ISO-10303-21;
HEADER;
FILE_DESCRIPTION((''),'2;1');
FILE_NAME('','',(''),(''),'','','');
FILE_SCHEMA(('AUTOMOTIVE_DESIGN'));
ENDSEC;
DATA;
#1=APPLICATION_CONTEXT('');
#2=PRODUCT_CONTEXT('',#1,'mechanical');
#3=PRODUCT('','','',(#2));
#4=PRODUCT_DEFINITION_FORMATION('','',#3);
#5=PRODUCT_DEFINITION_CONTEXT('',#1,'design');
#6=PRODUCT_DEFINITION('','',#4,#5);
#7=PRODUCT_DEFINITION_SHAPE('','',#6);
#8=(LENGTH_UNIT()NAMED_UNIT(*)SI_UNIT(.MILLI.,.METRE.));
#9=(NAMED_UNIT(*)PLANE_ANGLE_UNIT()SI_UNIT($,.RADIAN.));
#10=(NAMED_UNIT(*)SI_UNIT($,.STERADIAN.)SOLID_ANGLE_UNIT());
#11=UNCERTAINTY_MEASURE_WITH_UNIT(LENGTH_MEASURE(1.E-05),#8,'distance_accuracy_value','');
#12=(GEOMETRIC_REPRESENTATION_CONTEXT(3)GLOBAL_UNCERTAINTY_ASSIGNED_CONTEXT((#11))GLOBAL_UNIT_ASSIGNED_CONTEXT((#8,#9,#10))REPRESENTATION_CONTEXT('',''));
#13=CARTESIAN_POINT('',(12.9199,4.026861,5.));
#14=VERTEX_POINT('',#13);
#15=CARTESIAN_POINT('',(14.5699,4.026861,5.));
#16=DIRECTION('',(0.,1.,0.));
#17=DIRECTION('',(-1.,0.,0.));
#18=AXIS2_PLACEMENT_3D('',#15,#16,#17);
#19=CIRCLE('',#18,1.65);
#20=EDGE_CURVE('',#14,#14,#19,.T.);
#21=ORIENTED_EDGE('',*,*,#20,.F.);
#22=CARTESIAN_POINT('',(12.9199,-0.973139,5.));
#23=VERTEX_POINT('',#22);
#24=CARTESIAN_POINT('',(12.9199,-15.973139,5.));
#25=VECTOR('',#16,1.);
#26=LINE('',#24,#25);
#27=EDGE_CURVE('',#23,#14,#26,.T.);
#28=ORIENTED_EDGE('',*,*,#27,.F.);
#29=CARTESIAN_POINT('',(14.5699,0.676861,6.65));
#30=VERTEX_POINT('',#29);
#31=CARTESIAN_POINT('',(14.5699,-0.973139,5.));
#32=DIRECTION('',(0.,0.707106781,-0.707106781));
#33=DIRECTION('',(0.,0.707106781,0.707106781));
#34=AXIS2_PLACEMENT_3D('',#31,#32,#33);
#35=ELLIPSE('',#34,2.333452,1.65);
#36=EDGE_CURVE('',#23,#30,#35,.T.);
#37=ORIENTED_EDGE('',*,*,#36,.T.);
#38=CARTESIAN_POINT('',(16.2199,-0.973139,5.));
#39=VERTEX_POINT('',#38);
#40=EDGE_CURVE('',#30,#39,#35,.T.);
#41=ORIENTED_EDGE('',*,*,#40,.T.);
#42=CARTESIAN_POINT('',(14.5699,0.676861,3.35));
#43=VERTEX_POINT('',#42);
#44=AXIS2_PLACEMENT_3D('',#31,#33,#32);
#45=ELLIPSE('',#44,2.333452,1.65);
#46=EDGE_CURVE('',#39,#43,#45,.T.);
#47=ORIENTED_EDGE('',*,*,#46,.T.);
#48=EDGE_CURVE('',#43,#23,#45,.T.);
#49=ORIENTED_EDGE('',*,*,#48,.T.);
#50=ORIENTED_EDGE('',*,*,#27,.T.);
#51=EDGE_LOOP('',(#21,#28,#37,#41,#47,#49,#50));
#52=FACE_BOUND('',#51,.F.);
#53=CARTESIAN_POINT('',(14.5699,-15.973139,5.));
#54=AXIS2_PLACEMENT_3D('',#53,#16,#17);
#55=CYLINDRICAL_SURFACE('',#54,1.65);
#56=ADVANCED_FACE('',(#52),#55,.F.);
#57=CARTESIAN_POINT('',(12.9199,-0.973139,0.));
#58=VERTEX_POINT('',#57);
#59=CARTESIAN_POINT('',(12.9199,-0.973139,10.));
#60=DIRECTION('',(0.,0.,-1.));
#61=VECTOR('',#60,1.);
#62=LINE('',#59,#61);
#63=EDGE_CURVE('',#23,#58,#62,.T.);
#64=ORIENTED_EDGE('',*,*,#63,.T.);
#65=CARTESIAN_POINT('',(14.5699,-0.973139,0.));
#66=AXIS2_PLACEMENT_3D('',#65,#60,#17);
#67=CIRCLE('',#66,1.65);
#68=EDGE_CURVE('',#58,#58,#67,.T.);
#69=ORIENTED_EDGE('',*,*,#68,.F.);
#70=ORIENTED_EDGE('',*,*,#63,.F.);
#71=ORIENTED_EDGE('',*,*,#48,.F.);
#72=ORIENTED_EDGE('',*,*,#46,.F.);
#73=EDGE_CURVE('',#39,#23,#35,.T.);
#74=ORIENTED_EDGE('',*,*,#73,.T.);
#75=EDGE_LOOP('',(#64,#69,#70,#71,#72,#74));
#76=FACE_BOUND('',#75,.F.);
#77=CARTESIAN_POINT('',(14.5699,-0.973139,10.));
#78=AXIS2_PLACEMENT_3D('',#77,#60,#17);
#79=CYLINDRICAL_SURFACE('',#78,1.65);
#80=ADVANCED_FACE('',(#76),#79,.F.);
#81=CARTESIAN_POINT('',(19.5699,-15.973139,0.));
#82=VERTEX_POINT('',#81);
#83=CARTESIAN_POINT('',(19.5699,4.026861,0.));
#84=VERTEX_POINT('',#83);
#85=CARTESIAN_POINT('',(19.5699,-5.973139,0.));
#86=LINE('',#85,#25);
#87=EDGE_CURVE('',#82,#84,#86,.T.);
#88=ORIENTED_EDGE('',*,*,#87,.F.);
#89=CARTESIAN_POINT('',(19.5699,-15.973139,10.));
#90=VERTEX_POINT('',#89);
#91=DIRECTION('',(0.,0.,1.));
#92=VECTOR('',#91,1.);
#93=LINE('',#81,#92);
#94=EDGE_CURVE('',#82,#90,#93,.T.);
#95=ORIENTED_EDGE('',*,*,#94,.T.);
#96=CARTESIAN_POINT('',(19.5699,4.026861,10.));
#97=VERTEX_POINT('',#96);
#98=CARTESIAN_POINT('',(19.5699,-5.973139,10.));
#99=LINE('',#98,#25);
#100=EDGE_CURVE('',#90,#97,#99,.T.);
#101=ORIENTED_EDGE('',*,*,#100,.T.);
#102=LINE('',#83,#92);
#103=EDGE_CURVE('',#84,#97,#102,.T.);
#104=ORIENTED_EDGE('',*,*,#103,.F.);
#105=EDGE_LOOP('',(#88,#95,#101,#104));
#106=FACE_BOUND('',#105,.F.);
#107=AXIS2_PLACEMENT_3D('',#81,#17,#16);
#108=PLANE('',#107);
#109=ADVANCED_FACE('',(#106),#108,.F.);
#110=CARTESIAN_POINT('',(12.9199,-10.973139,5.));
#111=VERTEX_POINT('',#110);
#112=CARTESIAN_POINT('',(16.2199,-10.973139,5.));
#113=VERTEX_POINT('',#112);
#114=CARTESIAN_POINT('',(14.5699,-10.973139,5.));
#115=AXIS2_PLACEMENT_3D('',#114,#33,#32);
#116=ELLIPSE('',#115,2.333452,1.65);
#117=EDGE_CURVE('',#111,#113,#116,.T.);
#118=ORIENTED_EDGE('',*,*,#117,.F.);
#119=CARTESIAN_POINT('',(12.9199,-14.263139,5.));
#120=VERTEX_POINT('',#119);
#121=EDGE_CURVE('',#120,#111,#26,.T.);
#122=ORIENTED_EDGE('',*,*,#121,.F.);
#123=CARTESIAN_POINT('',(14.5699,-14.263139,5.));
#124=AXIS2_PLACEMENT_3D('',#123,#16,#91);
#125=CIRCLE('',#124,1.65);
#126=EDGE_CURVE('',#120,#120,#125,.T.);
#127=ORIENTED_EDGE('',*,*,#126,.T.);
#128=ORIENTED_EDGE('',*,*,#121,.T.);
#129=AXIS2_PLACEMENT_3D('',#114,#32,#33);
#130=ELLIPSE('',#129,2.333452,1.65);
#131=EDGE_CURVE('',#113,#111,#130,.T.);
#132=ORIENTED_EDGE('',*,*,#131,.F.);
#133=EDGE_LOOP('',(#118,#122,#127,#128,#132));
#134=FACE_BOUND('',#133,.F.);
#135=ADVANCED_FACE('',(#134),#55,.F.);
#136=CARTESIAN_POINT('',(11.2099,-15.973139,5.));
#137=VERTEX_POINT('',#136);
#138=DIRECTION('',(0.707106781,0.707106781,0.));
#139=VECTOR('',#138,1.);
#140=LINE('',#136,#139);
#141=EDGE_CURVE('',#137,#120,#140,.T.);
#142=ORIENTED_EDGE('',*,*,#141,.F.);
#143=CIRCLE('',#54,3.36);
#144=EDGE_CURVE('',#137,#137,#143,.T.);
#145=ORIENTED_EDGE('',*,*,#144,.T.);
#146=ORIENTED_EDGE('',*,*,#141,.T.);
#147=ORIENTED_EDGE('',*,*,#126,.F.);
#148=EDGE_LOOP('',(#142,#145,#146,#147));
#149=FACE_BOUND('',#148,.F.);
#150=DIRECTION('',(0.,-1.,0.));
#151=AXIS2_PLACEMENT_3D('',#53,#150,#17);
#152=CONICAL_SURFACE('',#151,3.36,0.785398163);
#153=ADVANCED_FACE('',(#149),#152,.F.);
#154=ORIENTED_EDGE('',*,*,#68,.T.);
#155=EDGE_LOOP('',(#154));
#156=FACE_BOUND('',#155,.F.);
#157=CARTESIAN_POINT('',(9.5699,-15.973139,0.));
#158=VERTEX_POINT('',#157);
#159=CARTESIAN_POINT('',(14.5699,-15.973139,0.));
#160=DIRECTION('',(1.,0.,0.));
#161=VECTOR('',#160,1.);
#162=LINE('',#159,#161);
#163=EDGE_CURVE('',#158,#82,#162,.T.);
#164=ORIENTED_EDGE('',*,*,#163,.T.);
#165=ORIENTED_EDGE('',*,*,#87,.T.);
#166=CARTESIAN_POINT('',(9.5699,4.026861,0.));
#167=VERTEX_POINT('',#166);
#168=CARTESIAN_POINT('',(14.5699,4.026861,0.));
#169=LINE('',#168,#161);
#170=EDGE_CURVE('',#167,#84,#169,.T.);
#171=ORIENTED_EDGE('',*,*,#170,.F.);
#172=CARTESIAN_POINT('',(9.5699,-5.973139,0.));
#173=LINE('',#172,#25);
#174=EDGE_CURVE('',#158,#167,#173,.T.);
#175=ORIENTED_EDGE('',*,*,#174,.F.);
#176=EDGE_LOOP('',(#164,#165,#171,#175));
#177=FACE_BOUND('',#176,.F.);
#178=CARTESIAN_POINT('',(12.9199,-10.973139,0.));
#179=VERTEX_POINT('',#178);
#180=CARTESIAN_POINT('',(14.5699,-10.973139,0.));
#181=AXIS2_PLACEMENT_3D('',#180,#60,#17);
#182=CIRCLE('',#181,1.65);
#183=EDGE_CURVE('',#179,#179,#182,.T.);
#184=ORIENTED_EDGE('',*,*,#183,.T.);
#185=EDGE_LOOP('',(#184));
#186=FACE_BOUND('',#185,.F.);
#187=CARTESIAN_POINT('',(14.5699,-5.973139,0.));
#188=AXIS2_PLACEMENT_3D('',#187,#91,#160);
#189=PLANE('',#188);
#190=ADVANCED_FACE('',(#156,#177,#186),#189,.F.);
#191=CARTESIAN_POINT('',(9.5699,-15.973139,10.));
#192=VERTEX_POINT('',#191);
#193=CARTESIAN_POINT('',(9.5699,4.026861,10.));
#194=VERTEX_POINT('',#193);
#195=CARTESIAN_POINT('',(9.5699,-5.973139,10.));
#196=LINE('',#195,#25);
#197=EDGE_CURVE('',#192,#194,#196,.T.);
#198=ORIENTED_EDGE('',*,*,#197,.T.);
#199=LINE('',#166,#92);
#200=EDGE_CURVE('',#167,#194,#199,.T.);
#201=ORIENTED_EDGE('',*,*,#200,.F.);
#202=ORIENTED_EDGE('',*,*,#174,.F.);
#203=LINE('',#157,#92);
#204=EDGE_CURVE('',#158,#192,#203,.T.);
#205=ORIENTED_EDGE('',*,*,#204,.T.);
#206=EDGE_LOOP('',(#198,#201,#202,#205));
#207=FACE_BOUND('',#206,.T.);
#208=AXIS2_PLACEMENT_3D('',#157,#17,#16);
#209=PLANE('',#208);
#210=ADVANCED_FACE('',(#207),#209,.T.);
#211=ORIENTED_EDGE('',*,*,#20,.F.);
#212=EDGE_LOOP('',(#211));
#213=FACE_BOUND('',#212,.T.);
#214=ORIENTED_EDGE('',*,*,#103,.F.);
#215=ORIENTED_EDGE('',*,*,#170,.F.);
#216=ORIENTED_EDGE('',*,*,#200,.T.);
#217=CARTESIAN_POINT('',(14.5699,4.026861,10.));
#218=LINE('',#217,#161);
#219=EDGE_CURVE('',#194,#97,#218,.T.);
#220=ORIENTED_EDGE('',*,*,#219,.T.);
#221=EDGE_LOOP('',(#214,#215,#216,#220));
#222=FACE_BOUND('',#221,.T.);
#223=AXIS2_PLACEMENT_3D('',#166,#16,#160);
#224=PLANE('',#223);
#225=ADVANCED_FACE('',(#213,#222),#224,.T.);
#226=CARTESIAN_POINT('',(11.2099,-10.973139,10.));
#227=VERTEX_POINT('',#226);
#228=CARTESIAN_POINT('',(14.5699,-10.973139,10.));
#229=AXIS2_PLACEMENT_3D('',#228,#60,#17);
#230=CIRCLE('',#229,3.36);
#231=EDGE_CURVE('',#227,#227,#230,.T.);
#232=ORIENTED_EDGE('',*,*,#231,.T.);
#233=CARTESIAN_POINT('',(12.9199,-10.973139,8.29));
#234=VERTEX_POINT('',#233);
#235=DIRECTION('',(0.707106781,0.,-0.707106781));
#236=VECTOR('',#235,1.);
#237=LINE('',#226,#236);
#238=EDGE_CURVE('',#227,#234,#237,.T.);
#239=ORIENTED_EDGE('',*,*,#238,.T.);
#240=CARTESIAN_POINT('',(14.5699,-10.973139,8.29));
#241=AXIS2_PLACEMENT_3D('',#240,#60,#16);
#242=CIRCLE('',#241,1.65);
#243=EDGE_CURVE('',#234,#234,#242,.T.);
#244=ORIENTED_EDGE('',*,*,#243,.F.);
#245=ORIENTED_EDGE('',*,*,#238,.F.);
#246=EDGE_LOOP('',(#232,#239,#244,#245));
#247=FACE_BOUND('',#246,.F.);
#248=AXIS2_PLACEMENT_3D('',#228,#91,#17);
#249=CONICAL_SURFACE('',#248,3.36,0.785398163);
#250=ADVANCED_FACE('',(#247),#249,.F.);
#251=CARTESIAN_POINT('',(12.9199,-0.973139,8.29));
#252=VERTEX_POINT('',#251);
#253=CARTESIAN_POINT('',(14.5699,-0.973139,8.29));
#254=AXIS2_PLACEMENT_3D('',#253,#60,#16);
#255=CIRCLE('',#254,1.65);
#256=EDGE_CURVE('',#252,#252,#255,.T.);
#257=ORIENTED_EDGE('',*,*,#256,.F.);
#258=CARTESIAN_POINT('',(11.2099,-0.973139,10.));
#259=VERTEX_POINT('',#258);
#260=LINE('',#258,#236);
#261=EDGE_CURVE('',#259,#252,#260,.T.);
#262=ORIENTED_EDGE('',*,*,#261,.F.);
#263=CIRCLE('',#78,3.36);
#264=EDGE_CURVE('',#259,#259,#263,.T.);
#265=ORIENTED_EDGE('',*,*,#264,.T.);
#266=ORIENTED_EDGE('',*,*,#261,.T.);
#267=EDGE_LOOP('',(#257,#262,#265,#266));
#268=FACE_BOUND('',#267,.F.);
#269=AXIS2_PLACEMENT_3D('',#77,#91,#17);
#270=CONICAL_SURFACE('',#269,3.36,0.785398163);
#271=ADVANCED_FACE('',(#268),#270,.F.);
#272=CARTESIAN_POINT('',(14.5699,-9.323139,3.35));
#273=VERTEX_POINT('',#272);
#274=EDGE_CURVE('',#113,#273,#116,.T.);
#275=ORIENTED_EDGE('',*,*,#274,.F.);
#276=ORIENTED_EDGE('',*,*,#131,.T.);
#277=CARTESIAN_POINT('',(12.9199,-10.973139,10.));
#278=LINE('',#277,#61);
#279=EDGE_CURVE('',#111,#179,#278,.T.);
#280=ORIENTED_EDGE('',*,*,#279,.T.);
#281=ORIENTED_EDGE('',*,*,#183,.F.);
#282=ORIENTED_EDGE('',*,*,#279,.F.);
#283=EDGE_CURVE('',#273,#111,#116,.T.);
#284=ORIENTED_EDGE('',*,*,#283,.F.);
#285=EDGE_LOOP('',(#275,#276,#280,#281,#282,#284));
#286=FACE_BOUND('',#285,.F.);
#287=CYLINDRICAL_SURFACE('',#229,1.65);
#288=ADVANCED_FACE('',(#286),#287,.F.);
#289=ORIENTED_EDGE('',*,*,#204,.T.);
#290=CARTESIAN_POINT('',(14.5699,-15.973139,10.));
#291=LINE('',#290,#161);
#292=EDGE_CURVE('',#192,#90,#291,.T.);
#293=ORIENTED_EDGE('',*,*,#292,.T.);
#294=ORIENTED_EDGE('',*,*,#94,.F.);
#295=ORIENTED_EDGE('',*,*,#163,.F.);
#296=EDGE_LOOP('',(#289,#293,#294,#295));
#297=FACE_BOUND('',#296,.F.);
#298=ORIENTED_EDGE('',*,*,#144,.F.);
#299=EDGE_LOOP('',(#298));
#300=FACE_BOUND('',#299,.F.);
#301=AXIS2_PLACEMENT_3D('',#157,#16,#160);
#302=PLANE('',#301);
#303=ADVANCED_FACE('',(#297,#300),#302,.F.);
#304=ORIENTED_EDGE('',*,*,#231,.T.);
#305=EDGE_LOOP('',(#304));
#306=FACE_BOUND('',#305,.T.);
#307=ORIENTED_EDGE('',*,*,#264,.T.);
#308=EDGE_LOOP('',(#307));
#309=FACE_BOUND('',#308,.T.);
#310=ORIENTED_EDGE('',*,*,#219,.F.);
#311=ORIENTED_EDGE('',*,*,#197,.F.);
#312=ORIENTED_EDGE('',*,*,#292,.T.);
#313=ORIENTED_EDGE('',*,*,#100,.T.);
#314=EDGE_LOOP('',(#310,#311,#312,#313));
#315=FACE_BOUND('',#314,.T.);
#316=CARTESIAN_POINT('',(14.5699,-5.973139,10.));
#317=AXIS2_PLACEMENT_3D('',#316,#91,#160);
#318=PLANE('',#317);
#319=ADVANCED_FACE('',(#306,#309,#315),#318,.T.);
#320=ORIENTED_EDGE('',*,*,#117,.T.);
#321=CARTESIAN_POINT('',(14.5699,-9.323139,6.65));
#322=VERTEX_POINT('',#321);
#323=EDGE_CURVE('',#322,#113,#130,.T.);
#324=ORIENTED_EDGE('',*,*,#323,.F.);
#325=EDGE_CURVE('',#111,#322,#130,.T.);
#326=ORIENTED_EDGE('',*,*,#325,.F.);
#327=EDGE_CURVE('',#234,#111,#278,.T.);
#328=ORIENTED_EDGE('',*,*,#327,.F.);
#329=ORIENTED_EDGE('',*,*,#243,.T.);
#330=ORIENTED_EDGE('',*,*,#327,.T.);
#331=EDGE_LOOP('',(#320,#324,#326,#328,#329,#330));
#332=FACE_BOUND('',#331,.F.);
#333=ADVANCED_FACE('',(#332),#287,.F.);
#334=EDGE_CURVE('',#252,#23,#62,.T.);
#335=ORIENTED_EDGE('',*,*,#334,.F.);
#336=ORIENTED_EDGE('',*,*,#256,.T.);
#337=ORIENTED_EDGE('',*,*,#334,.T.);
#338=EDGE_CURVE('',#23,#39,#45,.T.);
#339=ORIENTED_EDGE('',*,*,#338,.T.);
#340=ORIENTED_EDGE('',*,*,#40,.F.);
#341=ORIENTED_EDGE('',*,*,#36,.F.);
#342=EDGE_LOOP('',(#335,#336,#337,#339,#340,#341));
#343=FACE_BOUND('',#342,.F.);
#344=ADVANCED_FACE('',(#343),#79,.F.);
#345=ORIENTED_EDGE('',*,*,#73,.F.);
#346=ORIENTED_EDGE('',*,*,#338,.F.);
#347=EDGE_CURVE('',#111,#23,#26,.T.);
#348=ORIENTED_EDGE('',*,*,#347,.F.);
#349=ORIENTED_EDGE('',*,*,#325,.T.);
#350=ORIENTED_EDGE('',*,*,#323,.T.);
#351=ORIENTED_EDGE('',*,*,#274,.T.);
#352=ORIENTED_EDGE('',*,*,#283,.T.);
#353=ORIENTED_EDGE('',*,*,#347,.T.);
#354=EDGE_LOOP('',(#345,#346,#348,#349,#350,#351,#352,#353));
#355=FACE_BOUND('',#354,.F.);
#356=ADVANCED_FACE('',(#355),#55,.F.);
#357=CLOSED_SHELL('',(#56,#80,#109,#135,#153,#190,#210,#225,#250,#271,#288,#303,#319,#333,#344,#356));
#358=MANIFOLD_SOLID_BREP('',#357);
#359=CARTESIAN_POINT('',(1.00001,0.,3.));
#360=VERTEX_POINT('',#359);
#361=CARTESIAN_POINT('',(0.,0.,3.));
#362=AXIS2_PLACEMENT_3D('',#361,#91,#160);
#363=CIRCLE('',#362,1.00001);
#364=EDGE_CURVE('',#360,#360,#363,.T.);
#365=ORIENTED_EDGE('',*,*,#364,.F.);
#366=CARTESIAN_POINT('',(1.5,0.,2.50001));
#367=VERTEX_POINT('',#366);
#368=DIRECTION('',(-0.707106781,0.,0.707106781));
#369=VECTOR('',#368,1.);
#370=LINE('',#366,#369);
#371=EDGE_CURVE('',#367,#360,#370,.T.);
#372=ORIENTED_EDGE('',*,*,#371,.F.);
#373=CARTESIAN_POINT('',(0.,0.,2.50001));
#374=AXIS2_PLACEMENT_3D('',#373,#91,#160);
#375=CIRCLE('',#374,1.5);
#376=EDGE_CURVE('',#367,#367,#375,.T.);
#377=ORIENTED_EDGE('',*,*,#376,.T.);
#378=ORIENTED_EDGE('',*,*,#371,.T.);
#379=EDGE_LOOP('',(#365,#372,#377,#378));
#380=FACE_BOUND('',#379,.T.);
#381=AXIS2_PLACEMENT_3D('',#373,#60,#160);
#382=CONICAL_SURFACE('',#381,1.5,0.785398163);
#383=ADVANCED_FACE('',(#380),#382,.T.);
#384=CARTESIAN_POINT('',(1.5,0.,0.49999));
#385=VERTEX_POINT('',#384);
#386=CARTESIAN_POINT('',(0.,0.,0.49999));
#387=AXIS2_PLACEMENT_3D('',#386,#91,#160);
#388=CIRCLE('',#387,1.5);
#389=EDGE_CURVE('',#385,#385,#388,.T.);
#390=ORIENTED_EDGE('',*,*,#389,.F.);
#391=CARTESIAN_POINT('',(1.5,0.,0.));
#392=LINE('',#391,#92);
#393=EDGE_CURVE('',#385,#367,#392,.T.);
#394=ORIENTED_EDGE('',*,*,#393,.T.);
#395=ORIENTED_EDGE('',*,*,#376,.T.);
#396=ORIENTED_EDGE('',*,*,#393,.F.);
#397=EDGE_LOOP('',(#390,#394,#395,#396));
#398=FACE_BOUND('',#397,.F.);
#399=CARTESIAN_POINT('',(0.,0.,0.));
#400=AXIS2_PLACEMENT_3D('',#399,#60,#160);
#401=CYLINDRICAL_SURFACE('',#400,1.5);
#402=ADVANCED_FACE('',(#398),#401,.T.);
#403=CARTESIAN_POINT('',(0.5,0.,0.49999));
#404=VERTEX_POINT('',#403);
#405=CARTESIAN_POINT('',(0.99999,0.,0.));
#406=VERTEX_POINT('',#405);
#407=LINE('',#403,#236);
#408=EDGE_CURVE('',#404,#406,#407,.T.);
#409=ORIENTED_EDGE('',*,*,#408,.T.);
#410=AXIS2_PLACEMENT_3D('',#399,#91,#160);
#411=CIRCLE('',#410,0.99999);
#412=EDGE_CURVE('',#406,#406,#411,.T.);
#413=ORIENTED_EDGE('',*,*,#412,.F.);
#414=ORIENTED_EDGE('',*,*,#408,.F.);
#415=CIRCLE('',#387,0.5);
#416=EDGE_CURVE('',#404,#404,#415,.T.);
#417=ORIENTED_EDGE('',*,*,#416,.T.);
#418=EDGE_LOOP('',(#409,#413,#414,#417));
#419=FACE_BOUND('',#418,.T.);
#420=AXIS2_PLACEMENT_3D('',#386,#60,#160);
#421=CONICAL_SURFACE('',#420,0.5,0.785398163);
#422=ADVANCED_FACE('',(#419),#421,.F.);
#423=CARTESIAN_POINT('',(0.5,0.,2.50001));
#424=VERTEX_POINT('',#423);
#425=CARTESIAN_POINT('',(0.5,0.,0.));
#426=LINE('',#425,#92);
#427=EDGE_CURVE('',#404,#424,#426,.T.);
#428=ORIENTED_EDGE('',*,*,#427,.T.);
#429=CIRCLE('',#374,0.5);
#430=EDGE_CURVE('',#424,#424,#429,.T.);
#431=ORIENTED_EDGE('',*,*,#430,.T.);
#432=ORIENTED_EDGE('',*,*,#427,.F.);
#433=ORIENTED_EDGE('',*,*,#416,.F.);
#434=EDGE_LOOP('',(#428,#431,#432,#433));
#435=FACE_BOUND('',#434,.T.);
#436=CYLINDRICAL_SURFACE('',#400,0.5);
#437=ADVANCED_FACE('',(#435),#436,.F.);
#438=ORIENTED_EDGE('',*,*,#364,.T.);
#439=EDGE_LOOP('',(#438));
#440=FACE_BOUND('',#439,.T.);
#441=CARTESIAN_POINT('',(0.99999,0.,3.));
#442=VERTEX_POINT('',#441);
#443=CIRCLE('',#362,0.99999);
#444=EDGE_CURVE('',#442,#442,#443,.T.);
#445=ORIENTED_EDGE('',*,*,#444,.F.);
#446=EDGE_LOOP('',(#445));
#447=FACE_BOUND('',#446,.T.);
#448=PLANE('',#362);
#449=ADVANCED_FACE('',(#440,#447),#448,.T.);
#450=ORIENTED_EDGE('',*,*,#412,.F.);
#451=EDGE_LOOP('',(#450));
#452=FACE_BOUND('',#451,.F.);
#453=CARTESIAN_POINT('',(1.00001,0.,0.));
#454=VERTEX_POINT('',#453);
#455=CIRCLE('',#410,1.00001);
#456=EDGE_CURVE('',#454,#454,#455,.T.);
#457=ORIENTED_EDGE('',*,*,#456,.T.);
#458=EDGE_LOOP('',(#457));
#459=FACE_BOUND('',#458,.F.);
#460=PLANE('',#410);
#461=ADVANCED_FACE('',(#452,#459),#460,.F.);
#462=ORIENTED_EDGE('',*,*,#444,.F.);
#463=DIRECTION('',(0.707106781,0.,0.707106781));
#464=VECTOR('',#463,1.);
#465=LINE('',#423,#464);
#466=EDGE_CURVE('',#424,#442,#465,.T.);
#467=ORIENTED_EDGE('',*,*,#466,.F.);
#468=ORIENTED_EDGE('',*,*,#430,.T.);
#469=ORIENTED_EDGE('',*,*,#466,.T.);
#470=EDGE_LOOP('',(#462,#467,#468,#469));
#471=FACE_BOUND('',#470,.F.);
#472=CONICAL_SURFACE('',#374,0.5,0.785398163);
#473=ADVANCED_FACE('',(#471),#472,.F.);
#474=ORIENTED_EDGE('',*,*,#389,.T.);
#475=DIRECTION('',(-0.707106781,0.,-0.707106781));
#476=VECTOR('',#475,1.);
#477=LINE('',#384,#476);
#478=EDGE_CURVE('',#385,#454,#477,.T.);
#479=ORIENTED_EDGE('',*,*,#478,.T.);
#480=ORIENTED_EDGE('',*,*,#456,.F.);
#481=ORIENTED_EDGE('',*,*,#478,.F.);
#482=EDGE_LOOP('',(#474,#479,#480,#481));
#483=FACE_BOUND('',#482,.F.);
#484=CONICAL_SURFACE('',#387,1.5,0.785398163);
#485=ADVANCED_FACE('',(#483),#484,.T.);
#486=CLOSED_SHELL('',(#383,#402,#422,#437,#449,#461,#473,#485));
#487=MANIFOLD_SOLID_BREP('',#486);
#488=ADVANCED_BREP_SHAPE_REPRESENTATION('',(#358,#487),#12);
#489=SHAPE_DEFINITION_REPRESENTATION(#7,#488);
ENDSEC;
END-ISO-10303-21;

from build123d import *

# Parameters (mm, degrees)
F1_R           = 1.5
F1_R_2         = 0.5
F2_DEPTH       = 3
F3_SIZE        = 0.49999
F4_W           = 10
F4_H           = 20
F5_DEPTH       = 10
F7_D           = 3.3
F7_CSINK_D     = 6.72
F7_CSINK_ANGLE = 90
F9_D           = 3.3
F9_CSINK_D     = 6.72
F9_CSINK_ANGLE = 90


# Not quite as in the source:
# - a fillet or chamfer is up to 0.001 mm smaller than in the source, because OpenCascade refuses the exact size


with BuildPart() as f2:
    # F1 (on Top) → F2 (new body)
    with BuildSketch(Plane.XY):
        Circle(F1_R)
        Circle(F1_R_2, mode=Mode.SUBTRACT)
    extrude(amount=F2_DEPTH)

    # F3 (size 0.5 in the source; OpenCascade refuses exactly that, so slightly less here)
    f3_edges = [f2.edges().sort_by_distance(p)[0] for p in [
        (-0.5, 0, 3),
        (-1.5, 0, 3),
        (-1.5, 0, 0),
        (-0.5, 0, 0),
    ]]
    chamfer(f3_edges, length=F3_SIZE)


with BuildPart() as f5:
    # F4 (on Top) → F5 (new body)
    with BuildSketch(Plane.XY):
        with Locations((14.5698995329, -5.9731390672)):
            Rectangle(F4_W, F4_H)
    extrude(amount=F5_DEPTH)

    # F7 (through all)
    with Locations(Plane.XZ.offset(15.9731390672)):
        with Locations((14.5698995329, 5)):
            CounterSinkHole(F7_D / 2, F7_CSINK_D / 2, counter_sink_angle=F7_CSINK_ANGLE)

    # F9 (through all)
    with Locations(Plane.XY.offset(10)):
        with Locations((14.5698995329, -10.9731390672), (14.5698995329, -0.9731390672)):
            CounterSinkHole(F9_D / 2, F9_CSINK_D / 2, counter_sink_angle=F9_CSINK_ANGLE)


solid = Compound([f2.part, f5.part])
